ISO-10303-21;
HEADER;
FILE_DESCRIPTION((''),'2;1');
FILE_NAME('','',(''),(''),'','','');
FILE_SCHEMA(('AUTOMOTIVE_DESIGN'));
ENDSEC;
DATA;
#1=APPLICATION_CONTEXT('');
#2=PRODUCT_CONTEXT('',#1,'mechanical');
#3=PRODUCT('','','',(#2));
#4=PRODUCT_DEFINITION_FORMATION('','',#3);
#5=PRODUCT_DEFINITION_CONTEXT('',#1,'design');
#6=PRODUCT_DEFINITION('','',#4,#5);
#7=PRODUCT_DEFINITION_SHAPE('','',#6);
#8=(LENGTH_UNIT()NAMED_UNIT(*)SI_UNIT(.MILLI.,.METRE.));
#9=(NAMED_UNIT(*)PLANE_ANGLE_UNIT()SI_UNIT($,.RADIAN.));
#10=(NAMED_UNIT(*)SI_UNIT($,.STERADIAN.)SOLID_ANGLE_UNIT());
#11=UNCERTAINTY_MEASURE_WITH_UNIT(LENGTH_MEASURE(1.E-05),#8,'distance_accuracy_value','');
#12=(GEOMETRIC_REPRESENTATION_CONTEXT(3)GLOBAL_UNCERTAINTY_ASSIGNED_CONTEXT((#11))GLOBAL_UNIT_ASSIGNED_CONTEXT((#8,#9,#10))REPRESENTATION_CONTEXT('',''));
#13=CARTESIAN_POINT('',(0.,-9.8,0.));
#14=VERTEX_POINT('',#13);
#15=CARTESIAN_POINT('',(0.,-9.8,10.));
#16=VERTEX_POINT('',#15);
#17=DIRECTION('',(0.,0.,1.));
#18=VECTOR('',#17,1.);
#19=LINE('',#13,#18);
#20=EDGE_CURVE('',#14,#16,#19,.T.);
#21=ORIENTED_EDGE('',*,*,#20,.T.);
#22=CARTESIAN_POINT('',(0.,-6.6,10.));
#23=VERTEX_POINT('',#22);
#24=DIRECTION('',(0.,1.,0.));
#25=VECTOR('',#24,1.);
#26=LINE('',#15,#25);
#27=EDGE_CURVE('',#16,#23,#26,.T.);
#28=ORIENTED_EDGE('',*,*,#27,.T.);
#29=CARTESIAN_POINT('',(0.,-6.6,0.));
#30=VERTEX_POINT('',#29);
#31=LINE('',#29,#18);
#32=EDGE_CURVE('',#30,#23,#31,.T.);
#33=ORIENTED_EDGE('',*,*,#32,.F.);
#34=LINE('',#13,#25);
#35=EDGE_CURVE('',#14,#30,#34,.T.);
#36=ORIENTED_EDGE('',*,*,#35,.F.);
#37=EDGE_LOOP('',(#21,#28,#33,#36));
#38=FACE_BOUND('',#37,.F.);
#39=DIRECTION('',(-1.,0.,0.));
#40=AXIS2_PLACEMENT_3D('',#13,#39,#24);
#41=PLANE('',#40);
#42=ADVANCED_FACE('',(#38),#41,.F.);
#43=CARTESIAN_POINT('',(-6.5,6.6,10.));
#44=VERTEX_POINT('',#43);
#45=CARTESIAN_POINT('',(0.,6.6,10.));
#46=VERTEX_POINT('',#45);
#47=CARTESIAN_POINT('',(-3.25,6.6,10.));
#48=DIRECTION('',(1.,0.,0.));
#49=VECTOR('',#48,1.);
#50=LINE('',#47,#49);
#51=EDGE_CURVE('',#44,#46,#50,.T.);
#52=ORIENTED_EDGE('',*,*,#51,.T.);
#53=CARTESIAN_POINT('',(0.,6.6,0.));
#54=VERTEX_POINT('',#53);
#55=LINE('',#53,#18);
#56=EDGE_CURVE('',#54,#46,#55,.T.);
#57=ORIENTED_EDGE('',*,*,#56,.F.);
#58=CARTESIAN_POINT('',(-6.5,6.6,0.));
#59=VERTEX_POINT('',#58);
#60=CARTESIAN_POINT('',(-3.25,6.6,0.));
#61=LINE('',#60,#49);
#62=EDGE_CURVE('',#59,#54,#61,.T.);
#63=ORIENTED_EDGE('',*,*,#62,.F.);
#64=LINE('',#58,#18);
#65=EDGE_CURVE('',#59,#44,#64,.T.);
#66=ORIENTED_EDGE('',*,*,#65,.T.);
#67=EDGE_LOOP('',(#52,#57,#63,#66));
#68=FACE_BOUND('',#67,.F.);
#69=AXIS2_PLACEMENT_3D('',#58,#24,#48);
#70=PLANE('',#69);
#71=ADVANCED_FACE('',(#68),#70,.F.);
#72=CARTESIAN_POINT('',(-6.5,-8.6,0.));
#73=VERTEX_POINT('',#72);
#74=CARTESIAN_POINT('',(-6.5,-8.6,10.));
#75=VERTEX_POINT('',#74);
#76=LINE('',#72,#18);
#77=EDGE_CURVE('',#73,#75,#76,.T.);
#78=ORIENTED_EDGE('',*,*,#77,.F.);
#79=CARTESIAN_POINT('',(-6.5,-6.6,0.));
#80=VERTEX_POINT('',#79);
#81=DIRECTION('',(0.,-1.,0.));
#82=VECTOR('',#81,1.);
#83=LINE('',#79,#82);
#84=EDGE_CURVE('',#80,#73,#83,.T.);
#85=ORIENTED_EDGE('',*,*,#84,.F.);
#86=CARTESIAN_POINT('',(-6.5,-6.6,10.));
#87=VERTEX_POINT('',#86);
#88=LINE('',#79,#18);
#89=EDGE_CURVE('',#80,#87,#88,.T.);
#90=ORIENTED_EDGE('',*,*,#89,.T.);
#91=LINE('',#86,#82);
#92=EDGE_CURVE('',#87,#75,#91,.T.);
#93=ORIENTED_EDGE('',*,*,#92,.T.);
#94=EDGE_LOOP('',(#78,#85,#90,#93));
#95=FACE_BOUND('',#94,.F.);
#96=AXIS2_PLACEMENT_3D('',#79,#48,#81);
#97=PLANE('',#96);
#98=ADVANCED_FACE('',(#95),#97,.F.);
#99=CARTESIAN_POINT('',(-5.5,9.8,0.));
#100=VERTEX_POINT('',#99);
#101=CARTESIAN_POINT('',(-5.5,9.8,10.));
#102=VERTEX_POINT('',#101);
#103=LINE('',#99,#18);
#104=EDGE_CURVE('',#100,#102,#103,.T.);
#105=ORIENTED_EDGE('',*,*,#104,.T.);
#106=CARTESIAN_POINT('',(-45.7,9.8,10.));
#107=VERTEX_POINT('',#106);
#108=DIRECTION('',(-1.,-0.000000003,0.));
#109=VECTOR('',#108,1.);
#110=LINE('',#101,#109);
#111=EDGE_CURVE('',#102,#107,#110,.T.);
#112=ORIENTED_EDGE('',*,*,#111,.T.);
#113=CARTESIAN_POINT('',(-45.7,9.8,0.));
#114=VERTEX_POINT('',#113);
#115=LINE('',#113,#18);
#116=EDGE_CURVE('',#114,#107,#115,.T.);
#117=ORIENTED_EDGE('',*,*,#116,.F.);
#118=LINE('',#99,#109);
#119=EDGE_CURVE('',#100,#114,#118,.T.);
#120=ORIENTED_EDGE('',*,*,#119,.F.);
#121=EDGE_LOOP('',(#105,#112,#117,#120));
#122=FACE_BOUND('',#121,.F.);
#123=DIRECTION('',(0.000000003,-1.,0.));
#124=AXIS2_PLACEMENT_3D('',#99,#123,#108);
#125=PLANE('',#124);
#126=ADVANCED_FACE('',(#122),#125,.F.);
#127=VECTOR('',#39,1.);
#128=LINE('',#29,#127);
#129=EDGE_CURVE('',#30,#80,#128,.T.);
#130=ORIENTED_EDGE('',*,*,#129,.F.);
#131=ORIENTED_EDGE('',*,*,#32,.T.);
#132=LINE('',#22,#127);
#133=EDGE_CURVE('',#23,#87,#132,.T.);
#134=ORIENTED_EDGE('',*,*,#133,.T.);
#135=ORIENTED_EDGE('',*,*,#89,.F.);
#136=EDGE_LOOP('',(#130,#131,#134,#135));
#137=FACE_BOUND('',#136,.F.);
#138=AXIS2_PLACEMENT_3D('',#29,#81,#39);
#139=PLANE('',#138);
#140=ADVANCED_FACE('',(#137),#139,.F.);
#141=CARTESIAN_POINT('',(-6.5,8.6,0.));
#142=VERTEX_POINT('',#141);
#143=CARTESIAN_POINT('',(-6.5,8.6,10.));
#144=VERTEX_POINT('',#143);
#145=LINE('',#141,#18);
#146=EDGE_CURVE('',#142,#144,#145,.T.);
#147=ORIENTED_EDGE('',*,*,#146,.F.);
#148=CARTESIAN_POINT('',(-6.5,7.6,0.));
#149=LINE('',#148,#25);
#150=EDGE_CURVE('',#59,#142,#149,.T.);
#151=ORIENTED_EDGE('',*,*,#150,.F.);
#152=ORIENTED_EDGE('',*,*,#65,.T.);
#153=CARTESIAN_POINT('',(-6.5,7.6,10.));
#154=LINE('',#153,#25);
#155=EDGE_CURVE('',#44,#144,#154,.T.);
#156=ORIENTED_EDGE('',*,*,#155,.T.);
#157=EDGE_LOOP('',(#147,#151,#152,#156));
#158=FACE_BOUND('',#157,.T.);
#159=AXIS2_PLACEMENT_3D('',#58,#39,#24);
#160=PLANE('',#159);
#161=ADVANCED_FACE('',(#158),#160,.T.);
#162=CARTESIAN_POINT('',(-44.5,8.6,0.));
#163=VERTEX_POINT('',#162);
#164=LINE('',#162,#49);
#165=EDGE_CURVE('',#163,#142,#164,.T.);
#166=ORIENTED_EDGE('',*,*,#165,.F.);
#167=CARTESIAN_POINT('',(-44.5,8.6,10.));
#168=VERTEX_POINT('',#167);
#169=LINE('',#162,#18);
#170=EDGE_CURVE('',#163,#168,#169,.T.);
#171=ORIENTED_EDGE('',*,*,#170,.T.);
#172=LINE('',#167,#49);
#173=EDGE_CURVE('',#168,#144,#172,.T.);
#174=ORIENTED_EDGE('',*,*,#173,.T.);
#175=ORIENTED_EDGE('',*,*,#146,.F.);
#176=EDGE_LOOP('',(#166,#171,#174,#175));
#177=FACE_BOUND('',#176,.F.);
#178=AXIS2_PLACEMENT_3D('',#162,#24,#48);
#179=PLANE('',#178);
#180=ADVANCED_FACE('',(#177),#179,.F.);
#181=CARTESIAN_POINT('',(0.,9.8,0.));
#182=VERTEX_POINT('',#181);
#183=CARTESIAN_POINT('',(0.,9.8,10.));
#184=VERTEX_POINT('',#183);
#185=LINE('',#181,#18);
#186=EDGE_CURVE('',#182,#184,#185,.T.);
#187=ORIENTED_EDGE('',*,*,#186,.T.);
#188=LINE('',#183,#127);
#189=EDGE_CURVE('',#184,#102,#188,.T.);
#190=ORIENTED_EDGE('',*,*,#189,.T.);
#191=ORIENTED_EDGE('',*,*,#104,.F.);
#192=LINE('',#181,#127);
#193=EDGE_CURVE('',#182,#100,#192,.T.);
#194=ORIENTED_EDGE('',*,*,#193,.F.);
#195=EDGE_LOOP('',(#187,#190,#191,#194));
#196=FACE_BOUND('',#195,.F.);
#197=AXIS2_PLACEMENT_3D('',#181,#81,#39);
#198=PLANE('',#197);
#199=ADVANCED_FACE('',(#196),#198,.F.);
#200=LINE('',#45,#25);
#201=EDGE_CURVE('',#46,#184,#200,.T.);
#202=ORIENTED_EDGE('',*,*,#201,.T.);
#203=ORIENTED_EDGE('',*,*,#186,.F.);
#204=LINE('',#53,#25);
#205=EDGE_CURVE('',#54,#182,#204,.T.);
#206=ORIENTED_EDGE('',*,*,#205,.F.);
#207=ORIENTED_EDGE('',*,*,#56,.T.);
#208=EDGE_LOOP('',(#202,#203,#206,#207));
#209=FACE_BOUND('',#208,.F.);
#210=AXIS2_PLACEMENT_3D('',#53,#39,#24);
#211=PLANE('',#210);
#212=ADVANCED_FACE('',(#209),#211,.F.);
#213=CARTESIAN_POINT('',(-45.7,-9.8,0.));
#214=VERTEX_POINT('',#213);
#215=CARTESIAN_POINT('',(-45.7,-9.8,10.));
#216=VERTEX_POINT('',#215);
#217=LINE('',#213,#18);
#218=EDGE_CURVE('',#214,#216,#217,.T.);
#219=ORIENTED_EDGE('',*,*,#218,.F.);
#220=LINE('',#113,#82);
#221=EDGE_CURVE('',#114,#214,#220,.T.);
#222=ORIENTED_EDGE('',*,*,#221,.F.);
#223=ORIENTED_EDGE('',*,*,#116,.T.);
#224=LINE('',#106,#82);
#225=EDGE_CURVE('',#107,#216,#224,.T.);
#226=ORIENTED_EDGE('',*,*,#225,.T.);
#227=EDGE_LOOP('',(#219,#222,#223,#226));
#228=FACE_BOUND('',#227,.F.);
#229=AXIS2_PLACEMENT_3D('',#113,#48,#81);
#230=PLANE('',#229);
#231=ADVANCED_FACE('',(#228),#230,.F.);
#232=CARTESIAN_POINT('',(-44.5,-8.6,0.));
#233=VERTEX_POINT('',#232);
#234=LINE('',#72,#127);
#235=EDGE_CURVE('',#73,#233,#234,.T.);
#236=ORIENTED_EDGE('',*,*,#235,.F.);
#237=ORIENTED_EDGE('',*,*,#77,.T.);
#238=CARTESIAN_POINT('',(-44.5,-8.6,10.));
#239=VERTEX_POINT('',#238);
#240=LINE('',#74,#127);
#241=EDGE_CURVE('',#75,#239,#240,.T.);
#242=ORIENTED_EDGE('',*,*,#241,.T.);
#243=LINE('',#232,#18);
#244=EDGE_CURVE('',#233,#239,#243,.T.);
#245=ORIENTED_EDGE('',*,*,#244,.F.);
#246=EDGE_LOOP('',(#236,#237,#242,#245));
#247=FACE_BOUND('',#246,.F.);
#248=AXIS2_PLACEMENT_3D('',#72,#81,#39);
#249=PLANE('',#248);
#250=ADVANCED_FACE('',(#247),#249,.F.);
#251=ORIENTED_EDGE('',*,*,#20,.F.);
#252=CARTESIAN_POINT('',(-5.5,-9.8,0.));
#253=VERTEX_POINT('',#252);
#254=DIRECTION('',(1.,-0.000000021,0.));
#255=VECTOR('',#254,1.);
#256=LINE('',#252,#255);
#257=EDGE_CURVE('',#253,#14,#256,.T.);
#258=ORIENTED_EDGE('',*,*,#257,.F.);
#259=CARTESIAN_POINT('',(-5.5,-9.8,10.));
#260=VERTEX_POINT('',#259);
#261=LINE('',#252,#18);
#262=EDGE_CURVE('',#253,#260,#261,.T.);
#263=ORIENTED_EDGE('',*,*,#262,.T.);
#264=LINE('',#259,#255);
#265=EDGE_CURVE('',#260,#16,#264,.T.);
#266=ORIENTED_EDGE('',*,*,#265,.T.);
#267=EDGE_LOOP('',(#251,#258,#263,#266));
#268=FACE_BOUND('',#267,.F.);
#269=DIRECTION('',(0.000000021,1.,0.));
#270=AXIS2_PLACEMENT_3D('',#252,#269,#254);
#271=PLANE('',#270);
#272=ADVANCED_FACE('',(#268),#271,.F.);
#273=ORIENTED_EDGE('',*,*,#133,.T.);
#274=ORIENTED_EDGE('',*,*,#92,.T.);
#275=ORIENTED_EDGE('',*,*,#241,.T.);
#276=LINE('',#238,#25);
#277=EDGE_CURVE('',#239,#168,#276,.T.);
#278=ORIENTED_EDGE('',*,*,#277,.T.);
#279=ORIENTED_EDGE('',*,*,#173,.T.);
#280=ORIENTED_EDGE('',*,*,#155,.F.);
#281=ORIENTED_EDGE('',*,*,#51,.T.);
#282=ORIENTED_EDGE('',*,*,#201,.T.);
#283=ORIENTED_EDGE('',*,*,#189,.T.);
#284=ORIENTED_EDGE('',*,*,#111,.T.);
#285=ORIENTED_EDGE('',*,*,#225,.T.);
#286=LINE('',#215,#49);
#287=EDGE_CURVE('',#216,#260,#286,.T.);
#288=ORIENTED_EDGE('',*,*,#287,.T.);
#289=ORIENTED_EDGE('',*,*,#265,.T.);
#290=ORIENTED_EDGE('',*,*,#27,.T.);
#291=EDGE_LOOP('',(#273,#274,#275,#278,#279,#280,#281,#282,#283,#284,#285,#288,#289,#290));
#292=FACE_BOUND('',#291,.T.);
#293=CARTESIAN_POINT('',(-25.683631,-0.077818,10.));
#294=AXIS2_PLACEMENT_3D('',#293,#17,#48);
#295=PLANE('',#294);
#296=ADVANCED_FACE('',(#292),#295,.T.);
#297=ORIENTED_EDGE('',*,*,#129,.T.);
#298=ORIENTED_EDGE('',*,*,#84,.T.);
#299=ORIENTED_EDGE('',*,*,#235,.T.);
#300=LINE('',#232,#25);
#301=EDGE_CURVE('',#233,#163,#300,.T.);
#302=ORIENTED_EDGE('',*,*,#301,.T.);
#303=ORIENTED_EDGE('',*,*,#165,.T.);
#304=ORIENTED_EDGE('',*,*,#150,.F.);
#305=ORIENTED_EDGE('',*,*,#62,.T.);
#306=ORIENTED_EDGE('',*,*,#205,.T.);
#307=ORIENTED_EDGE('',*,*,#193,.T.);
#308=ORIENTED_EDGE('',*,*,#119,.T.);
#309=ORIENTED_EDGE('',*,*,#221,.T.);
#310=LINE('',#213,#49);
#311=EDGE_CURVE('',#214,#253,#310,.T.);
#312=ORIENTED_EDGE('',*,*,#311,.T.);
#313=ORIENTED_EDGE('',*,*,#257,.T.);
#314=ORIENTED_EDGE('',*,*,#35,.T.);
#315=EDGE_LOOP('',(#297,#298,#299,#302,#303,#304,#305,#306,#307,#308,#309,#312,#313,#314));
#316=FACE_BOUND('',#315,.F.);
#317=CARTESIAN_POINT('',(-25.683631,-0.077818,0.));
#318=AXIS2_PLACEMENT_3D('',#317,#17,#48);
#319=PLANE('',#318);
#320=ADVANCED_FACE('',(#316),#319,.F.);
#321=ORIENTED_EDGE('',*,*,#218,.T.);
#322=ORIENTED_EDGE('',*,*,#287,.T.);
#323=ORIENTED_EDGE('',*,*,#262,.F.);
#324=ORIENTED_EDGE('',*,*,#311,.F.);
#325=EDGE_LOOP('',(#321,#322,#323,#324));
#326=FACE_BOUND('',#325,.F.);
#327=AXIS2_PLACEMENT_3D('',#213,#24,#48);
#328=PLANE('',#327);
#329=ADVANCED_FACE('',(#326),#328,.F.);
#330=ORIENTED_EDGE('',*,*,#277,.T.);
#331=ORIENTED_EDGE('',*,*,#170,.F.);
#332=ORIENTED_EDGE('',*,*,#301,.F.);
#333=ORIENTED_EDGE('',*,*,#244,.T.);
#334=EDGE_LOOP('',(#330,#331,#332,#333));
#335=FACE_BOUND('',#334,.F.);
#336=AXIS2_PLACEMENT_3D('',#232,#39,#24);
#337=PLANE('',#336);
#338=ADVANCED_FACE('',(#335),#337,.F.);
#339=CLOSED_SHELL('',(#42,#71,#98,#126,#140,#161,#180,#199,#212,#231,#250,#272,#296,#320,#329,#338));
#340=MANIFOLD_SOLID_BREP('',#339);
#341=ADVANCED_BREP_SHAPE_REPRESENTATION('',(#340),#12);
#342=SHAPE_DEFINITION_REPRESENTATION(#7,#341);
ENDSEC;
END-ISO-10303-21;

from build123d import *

# Parameters (mm, degrees)
F0_W     = 6.5
F0_H     = 2
F1_DEPTH = 10


# Not quite as in the source:
# - ends of sketch curves that miss each other by under 0.0002 mm in the source are joined


with BuildPart() as f1:
    # F0 (on Top) → F1 (new body)
    with BuildSketch(Plane.XY):
        Polygon((-44.5, -8.6), (-44.5, 0), (-44.5, 8.6), (-6.5, 8.6), (0, 8.6), (0, 9.8000001162), (-5.5, 9.8000001162), (-45.7, 9.8), (-45.7, 0), (-45.7, -9.8), (-5.5, -9.8), (0, -9.8000001162), (0, -8.6), (0, -6.6), (-6.5, -6.6), (-6.5, -8.6), align=None)
        with Locations((-3.25, 7.6)):
            Rectangle(F0_W, F0_H)
    extrude(amount=F1_DEPTH)


solid = f1.part
